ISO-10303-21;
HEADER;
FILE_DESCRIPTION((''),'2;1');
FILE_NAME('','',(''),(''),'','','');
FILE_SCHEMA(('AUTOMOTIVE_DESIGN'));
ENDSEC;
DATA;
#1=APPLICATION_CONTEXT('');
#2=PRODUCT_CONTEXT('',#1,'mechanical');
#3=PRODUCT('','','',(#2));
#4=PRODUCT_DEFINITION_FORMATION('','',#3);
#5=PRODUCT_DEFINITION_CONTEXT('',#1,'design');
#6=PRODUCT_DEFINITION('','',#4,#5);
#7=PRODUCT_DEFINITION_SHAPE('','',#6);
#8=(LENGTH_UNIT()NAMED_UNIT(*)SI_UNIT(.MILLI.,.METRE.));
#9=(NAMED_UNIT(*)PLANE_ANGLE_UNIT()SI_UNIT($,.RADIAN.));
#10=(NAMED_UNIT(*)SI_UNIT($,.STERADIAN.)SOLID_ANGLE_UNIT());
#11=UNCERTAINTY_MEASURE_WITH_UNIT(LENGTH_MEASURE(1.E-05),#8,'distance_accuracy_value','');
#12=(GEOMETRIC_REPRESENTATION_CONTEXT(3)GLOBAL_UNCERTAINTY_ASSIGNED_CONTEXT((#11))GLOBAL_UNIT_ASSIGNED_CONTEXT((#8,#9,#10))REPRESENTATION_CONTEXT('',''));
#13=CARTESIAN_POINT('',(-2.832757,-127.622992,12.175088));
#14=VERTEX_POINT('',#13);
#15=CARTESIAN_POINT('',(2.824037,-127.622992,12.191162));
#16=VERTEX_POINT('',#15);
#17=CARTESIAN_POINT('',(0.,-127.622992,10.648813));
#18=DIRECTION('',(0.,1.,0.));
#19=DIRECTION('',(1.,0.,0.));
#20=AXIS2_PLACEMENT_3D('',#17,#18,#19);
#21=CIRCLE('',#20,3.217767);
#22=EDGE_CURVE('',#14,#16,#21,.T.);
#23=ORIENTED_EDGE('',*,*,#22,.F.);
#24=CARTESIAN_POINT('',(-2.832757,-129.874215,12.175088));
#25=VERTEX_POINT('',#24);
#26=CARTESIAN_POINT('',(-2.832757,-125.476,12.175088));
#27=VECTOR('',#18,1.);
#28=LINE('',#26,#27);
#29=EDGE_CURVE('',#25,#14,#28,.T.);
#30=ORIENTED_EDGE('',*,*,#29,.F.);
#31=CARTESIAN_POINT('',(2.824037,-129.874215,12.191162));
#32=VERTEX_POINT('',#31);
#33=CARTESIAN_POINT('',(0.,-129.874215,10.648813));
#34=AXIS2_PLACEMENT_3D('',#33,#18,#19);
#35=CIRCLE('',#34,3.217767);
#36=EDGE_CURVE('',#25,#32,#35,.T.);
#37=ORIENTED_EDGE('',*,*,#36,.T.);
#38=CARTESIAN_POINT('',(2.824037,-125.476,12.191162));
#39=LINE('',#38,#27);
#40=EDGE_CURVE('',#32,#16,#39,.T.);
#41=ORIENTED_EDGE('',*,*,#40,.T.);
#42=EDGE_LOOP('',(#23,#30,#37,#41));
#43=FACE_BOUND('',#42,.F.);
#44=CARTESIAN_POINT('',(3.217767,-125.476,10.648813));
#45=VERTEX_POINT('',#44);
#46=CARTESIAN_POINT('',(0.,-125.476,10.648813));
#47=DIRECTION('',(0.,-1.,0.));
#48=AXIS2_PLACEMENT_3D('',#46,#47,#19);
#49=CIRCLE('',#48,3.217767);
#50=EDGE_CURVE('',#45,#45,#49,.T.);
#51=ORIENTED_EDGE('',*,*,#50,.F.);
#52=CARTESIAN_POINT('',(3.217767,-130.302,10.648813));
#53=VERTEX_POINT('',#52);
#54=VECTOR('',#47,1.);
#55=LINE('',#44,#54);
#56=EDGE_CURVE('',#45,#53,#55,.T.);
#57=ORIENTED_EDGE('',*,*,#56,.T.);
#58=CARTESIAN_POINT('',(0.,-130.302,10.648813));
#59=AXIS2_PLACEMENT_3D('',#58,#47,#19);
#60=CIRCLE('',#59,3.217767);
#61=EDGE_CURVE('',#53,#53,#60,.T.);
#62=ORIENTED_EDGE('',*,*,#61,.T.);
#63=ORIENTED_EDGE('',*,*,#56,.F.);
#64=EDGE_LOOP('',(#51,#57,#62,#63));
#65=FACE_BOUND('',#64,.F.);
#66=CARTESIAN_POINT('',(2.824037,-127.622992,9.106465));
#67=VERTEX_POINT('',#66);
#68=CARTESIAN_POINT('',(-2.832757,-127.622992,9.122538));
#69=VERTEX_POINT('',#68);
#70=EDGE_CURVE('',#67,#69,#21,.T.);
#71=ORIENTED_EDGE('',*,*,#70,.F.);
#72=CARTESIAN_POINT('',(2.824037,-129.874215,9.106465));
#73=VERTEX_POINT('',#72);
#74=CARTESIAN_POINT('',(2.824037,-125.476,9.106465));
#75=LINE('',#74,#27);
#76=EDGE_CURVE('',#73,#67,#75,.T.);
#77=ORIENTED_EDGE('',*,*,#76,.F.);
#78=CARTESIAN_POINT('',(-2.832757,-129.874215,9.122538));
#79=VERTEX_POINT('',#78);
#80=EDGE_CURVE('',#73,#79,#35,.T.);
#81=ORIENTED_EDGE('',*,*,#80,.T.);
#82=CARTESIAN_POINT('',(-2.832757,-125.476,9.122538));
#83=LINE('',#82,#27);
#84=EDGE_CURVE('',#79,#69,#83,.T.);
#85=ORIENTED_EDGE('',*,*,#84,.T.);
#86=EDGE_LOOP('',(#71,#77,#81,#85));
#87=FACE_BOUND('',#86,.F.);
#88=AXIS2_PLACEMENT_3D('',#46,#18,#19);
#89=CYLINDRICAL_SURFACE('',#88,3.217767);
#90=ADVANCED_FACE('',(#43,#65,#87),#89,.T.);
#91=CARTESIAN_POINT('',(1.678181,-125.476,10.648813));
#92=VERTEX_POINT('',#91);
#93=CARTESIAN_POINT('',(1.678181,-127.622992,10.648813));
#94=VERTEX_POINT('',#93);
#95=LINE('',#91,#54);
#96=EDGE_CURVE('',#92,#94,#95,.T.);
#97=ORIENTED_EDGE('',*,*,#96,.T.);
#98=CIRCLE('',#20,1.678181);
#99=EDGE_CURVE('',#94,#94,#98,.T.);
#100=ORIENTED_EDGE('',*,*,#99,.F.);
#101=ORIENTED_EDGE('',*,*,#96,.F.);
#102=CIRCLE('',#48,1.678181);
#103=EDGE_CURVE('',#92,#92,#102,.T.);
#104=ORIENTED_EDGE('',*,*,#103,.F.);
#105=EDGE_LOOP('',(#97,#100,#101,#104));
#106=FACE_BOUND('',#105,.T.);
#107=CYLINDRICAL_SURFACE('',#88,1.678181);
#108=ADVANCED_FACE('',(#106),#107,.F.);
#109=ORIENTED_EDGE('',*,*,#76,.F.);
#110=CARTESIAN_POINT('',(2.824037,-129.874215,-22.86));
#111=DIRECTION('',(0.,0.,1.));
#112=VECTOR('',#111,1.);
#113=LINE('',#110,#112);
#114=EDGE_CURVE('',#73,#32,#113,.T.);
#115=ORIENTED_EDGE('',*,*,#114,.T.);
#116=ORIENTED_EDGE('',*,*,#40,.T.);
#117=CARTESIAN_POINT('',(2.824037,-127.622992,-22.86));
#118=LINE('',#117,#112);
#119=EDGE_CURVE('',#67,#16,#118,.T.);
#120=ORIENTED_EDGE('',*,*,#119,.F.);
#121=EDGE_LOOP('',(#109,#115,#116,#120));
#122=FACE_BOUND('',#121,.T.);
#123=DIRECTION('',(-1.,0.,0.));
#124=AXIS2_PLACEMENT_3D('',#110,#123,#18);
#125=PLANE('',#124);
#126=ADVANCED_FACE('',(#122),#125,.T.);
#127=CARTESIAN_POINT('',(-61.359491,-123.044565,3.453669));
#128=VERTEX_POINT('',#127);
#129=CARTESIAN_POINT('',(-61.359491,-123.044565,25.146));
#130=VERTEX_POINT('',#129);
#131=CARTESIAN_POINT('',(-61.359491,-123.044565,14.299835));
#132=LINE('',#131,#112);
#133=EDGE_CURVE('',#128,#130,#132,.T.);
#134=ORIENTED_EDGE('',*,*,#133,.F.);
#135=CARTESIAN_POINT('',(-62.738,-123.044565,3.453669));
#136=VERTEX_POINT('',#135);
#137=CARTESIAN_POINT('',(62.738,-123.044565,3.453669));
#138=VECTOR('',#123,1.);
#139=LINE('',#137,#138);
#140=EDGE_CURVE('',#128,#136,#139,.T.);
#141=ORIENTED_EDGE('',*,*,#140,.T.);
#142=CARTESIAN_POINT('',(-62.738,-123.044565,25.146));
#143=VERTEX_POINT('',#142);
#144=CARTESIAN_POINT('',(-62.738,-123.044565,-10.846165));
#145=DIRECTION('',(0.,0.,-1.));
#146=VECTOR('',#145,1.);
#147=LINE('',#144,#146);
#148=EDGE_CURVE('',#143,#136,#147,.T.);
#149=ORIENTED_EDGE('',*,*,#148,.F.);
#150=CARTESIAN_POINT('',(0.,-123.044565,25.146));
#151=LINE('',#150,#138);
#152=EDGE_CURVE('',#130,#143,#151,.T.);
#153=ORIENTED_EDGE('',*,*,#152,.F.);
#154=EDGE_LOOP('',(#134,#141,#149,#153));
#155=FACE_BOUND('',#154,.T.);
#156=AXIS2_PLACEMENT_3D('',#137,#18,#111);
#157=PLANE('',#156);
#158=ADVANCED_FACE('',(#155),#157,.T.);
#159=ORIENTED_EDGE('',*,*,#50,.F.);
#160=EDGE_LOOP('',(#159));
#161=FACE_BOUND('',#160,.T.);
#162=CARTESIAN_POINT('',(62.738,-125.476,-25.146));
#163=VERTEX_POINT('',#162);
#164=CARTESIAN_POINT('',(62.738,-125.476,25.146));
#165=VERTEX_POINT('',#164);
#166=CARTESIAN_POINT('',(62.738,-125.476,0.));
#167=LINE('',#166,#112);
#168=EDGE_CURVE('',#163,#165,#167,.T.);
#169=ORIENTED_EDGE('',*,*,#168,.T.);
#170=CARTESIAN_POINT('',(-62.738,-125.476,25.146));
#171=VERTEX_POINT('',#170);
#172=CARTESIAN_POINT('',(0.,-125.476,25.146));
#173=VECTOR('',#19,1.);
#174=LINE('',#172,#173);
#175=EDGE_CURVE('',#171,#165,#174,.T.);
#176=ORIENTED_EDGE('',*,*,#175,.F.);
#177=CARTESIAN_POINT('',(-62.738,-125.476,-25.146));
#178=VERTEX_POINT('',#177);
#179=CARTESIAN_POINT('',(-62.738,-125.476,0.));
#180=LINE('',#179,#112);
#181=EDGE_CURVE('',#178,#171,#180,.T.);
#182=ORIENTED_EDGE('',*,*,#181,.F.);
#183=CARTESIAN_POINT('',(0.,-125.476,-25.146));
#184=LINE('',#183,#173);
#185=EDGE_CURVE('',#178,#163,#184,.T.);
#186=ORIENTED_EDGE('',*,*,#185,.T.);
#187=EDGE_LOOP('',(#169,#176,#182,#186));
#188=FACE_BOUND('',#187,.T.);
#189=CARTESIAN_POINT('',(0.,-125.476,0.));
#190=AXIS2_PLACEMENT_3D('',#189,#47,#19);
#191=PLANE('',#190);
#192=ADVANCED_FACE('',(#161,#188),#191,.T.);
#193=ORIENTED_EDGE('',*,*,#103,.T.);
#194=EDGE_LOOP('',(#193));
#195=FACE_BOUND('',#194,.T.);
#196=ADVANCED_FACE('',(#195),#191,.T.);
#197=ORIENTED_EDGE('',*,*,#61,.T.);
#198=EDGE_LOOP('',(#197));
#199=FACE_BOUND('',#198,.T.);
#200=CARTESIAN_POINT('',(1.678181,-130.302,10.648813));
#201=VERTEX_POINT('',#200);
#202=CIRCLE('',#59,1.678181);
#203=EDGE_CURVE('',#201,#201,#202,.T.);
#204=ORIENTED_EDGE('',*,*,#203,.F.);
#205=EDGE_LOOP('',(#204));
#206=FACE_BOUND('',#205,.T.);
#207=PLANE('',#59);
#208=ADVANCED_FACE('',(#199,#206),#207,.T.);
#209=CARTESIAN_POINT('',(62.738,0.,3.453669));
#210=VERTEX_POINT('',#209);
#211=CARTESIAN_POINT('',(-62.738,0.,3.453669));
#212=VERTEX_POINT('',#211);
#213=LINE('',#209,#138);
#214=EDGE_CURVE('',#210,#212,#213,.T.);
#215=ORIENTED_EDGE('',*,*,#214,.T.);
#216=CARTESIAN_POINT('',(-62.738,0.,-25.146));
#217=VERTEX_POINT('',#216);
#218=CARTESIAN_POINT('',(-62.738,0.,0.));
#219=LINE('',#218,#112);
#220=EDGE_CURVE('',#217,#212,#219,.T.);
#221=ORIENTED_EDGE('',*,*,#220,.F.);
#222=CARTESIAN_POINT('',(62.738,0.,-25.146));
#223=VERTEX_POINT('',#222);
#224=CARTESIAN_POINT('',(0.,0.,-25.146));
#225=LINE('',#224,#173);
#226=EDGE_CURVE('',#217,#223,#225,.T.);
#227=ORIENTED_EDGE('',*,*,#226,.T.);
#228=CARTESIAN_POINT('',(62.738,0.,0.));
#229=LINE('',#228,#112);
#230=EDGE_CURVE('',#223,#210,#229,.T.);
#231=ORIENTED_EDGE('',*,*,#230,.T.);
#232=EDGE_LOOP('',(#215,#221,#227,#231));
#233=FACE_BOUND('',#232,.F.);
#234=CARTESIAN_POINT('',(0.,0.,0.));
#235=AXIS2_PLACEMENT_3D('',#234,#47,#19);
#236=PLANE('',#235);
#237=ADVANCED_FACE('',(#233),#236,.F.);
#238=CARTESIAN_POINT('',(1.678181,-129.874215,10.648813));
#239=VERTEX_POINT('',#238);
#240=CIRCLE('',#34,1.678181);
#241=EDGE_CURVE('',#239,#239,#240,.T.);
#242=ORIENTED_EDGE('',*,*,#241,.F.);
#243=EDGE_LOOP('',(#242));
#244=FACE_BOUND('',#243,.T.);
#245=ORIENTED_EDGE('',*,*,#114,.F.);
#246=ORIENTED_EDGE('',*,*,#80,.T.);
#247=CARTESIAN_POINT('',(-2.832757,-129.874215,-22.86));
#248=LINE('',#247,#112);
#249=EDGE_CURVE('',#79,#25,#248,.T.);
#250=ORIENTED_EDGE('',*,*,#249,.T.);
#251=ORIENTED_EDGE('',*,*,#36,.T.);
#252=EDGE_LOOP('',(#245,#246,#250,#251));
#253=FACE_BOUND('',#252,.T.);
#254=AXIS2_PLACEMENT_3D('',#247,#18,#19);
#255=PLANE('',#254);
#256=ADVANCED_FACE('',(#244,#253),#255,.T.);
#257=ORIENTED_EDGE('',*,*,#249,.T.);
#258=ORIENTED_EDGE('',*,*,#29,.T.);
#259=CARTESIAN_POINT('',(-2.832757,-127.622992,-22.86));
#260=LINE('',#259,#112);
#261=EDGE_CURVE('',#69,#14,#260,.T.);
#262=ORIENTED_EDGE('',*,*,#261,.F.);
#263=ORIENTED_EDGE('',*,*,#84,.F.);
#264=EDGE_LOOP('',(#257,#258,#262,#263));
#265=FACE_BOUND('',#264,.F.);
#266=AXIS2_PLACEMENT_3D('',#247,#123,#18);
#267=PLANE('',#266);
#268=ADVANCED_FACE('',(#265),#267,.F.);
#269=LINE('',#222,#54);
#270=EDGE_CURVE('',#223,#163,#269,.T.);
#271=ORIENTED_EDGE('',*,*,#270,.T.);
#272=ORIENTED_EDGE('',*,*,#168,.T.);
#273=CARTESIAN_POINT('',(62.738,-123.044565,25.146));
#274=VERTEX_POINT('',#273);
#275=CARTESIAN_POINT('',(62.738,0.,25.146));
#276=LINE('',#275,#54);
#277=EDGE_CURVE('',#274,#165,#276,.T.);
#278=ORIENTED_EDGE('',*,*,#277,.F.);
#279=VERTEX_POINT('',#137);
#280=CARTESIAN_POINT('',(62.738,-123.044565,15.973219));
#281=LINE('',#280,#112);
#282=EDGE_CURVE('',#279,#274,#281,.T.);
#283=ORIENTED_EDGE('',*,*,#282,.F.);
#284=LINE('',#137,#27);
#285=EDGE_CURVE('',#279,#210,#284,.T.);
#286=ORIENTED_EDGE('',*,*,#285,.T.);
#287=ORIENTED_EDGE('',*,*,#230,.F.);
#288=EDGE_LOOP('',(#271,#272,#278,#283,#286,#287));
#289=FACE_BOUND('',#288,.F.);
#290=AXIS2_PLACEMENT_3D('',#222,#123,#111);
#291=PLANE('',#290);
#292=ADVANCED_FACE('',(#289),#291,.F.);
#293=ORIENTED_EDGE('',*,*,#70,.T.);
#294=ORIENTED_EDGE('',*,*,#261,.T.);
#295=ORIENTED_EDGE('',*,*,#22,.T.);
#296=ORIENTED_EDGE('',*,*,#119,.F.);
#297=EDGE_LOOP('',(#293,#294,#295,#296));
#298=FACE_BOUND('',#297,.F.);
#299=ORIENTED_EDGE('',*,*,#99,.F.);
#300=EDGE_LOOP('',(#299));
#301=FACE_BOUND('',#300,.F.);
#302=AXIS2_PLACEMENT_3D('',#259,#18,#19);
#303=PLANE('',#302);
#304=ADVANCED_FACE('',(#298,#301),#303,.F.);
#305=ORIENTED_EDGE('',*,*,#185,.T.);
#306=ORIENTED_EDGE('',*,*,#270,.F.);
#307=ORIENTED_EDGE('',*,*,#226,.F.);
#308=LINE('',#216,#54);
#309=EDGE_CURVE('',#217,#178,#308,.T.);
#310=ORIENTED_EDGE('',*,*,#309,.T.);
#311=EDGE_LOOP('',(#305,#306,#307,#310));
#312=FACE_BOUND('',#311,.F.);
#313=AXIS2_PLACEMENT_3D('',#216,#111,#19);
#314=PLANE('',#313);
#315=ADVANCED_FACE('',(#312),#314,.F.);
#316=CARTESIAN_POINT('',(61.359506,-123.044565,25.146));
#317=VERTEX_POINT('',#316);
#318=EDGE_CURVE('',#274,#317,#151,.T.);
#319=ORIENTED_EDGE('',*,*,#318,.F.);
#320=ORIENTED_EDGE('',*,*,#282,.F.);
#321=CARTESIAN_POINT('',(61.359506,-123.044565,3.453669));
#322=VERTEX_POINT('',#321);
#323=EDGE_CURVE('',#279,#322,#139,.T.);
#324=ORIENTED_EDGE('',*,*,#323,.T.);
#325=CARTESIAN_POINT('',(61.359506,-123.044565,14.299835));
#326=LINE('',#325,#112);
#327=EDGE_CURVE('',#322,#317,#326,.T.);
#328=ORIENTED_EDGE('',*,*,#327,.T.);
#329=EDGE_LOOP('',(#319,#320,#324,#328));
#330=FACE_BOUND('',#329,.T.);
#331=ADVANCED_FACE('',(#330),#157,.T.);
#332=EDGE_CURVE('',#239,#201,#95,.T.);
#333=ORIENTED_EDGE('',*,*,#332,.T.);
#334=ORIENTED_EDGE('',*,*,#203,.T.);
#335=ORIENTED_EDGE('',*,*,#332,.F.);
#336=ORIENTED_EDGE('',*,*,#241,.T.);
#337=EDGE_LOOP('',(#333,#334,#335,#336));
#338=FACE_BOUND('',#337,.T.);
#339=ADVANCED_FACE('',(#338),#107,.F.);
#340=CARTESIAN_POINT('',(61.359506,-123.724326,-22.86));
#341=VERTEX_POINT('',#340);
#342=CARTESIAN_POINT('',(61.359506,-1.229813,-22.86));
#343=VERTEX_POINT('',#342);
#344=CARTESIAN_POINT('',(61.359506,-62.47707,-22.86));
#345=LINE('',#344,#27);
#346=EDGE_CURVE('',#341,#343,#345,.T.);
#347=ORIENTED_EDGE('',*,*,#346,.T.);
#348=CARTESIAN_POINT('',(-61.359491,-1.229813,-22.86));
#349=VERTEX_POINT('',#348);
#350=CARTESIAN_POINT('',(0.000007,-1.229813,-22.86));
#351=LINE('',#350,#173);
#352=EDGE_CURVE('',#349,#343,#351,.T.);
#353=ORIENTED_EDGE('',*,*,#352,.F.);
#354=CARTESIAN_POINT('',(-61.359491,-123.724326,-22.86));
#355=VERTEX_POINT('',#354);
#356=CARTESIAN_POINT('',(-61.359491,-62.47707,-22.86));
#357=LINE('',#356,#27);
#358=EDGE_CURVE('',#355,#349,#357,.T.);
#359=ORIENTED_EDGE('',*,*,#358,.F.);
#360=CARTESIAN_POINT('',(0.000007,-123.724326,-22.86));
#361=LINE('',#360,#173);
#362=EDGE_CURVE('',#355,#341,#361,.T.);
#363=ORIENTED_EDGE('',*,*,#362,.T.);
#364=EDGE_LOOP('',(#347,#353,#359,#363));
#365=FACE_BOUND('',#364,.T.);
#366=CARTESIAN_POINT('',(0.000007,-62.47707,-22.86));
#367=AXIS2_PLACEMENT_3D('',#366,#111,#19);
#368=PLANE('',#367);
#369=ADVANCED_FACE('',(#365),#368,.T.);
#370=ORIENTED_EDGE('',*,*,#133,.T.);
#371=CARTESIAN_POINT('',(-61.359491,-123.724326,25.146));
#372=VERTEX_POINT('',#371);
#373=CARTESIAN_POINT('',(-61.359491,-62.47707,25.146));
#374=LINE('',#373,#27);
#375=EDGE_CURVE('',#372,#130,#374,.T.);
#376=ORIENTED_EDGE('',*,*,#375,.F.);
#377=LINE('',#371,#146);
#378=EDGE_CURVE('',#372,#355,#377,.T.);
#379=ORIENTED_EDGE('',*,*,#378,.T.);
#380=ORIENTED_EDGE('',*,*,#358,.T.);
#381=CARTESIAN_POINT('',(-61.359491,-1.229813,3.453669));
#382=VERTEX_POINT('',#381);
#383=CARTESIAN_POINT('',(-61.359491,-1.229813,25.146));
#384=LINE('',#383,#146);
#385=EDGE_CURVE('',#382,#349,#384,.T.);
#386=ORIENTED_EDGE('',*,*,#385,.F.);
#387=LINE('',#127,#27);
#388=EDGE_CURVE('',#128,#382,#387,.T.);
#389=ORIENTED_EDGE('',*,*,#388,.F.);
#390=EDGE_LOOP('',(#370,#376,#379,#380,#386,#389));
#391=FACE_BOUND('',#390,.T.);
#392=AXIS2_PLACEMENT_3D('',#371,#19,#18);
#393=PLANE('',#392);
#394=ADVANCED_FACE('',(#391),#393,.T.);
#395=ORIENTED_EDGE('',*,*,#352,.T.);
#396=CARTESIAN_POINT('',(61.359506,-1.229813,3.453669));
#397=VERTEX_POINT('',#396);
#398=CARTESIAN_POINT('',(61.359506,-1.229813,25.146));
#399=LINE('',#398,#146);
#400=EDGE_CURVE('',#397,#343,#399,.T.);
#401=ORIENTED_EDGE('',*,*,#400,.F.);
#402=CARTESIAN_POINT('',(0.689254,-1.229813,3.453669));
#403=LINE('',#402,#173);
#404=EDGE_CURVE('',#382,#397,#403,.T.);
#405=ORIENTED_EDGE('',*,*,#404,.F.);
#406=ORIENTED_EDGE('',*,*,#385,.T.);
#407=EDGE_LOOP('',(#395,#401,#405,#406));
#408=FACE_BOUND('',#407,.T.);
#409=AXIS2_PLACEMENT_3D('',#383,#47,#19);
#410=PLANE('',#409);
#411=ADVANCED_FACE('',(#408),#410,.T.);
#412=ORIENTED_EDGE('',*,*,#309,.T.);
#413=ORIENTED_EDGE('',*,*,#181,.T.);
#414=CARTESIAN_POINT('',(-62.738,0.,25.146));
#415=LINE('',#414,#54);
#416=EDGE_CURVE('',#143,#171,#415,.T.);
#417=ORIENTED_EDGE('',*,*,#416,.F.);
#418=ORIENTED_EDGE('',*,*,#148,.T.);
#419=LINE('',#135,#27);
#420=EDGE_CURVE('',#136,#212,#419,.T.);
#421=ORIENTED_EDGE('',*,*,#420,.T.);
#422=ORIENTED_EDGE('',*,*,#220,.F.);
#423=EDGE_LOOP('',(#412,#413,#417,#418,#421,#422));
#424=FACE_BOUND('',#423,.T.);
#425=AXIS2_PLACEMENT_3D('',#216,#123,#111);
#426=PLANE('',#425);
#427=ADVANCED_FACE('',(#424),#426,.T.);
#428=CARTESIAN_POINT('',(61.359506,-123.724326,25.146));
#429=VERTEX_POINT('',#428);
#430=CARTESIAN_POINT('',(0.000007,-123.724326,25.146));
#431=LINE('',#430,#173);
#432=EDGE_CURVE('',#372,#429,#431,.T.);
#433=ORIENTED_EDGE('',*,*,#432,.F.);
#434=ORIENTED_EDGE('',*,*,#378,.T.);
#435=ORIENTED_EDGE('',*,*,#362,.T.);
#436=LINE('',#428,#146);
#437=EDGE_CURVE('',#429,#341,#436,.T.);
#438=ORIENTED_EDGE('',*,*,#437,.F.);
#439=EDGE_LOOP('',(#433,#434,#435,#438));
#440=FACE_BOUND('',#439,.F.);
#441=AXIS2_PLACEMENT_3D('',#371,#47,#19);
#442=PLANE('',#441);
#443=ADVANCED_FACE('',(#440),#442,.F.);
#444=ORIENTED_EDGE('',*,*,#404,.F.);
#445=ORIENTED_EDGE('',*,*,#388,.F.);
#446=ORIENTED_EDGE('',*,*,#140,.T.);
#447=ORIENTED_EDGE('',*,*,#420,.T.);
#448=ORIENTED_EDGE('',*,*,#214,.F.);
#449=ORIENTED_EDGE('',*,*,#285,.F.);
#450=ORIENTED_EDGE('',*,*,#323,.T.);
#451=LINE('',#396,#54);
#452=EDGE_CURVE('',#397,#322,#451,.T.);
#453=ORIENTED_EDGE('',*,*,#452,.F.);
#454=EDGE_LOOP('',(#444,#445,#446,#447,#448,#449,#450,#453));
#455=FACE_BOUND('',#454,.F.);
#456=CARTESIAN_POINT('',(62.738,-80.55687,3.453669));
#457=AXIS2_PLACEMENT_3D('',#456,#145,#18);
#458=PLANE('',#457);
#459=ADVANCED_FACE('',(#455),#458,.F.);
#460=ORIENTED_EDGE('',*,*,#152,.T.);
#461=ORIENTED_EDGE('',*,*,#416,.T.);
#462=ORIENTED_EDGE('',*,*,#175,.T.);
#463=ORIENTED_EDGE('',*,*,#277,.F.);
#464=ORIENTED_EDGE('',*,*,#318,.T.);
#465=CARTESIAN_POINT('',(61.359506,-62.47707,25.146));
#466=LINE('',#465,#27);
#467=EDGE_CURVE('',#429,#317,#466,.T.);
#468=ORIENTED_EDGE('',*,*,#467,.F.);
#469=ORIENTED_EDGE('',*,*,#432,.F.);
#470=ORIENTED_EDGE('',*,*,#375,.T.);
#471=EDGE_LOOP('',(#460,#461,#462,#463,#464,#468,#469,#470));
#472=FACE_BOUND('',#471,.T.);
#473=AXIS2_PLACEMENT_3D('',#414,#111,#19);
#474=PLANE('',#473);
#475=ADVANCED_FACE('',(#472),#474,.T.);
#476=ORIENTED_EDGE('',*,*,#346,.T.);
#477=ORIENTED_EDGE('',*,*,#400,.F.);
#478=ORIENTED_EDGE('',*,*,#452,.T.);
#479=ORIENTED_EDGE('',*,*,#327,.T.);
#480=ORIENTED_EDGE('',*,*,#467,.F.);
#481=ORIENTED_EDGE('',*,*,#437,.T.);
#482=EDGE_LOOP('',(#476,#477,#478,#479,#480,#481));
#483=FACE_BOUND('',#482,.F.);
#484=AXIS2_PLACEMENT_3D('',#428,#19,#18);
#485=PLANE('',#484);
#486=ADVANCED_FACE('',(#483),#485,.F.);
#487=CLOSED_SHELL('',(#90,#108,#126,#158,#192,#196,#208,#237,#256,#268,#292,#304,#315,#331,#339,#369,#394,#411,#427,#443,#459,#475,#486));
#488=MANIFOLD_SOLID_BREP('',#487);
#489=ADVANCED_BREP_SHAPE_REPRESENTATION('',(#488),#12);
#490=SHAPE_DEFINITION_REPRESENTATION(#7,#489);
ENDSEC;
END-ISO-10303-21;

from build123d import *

# Parameters (mm, degrees)
F0_W      = 125.476
F0_H      = 50.292
F1_DEPTH  = 125.476
F2_W      = 122.7189972997
F2_H      = 122.4945134018
F3_DEPTH  = 48.006
F5_R      = 3.2177672419
F5_R_2    = 1.6781805888
F6_DEPTH  = 4.826
F7_W      = 80.5568695068
F7_H      = 21.6923308617
F8_DEPTH  = 125.477
F9_W      = 42.4876958132
F9_H      = 25.0391000882
F10_DEPTH = 125.477
F11_W     = 5.6567939464
F11_H     = 2.2512227297
F12_DEPTH = 48.007


# Not quite as in the source:
# - a feature names something its author has since deleted; it is built from what else it names


with BuildPart() as f1:
    # F0 (on Front) → F1 (new body)
    with BuildSketch(Plane.XZ):
        Rectangle(F0_W, F0_H)
    extrude(amount=F1_DEPTH)

    # F2 (on face) → F3 (cut)
    with BuildSketch(Plane.XY.offset(25.146)):
        with Locations((7.4506e-06, -62.4770697905)):
            Rectangle(F2_W, F2_H)
    extrude(amount=-F3_DEPTH, mode=Mode.SUBTRACT)

    # F5 (on face) → F6 (join)
    with BuildSketch(Plane.XZ.offset(125.476)):
        with Locations((0, 10.6488130987)):
            Circle(F5_R)
        with Locations((0, 10.6488130987)):
            Circle(F5_R_2, mode=Mode.SUBTRACT)
    extrude(amount=F6_DEPTH)

    # F7 (on face) → F8 (cut, through all)
    with BuildSketch(Plane.YZ.offset(62.738)):
        with Locations((-40.2784347534, 14.2998345691)):
            Rectangle(F7_W, F7_H)
    extrude(amount=-F8_DEPTH, mode=Mode.SUBTRACT)

    # F9 (on face) → F10 (cut, through all)
    with BuildSketch(Plane.YZ.offset(62.738)):
        with Locations((-101.8007174134, 15.9732191823)):
            Rectangle(F9_W, F9_H)
    extrude(amount=-F10_DEPTH, mode=Mode.SUBTRACT)

    # F11 (on face) → F12 (cut, through all)
    with BuildSketch(Plane.XY.offset(-22.86)):
        with Locations((-0.0043596374, -128.7486031651)):
            Rectangle(F11_W, F11_H)
    extrude(amount=F12_DEPTH, mode=Mode.SUBTRACT)


solid = f1.part
